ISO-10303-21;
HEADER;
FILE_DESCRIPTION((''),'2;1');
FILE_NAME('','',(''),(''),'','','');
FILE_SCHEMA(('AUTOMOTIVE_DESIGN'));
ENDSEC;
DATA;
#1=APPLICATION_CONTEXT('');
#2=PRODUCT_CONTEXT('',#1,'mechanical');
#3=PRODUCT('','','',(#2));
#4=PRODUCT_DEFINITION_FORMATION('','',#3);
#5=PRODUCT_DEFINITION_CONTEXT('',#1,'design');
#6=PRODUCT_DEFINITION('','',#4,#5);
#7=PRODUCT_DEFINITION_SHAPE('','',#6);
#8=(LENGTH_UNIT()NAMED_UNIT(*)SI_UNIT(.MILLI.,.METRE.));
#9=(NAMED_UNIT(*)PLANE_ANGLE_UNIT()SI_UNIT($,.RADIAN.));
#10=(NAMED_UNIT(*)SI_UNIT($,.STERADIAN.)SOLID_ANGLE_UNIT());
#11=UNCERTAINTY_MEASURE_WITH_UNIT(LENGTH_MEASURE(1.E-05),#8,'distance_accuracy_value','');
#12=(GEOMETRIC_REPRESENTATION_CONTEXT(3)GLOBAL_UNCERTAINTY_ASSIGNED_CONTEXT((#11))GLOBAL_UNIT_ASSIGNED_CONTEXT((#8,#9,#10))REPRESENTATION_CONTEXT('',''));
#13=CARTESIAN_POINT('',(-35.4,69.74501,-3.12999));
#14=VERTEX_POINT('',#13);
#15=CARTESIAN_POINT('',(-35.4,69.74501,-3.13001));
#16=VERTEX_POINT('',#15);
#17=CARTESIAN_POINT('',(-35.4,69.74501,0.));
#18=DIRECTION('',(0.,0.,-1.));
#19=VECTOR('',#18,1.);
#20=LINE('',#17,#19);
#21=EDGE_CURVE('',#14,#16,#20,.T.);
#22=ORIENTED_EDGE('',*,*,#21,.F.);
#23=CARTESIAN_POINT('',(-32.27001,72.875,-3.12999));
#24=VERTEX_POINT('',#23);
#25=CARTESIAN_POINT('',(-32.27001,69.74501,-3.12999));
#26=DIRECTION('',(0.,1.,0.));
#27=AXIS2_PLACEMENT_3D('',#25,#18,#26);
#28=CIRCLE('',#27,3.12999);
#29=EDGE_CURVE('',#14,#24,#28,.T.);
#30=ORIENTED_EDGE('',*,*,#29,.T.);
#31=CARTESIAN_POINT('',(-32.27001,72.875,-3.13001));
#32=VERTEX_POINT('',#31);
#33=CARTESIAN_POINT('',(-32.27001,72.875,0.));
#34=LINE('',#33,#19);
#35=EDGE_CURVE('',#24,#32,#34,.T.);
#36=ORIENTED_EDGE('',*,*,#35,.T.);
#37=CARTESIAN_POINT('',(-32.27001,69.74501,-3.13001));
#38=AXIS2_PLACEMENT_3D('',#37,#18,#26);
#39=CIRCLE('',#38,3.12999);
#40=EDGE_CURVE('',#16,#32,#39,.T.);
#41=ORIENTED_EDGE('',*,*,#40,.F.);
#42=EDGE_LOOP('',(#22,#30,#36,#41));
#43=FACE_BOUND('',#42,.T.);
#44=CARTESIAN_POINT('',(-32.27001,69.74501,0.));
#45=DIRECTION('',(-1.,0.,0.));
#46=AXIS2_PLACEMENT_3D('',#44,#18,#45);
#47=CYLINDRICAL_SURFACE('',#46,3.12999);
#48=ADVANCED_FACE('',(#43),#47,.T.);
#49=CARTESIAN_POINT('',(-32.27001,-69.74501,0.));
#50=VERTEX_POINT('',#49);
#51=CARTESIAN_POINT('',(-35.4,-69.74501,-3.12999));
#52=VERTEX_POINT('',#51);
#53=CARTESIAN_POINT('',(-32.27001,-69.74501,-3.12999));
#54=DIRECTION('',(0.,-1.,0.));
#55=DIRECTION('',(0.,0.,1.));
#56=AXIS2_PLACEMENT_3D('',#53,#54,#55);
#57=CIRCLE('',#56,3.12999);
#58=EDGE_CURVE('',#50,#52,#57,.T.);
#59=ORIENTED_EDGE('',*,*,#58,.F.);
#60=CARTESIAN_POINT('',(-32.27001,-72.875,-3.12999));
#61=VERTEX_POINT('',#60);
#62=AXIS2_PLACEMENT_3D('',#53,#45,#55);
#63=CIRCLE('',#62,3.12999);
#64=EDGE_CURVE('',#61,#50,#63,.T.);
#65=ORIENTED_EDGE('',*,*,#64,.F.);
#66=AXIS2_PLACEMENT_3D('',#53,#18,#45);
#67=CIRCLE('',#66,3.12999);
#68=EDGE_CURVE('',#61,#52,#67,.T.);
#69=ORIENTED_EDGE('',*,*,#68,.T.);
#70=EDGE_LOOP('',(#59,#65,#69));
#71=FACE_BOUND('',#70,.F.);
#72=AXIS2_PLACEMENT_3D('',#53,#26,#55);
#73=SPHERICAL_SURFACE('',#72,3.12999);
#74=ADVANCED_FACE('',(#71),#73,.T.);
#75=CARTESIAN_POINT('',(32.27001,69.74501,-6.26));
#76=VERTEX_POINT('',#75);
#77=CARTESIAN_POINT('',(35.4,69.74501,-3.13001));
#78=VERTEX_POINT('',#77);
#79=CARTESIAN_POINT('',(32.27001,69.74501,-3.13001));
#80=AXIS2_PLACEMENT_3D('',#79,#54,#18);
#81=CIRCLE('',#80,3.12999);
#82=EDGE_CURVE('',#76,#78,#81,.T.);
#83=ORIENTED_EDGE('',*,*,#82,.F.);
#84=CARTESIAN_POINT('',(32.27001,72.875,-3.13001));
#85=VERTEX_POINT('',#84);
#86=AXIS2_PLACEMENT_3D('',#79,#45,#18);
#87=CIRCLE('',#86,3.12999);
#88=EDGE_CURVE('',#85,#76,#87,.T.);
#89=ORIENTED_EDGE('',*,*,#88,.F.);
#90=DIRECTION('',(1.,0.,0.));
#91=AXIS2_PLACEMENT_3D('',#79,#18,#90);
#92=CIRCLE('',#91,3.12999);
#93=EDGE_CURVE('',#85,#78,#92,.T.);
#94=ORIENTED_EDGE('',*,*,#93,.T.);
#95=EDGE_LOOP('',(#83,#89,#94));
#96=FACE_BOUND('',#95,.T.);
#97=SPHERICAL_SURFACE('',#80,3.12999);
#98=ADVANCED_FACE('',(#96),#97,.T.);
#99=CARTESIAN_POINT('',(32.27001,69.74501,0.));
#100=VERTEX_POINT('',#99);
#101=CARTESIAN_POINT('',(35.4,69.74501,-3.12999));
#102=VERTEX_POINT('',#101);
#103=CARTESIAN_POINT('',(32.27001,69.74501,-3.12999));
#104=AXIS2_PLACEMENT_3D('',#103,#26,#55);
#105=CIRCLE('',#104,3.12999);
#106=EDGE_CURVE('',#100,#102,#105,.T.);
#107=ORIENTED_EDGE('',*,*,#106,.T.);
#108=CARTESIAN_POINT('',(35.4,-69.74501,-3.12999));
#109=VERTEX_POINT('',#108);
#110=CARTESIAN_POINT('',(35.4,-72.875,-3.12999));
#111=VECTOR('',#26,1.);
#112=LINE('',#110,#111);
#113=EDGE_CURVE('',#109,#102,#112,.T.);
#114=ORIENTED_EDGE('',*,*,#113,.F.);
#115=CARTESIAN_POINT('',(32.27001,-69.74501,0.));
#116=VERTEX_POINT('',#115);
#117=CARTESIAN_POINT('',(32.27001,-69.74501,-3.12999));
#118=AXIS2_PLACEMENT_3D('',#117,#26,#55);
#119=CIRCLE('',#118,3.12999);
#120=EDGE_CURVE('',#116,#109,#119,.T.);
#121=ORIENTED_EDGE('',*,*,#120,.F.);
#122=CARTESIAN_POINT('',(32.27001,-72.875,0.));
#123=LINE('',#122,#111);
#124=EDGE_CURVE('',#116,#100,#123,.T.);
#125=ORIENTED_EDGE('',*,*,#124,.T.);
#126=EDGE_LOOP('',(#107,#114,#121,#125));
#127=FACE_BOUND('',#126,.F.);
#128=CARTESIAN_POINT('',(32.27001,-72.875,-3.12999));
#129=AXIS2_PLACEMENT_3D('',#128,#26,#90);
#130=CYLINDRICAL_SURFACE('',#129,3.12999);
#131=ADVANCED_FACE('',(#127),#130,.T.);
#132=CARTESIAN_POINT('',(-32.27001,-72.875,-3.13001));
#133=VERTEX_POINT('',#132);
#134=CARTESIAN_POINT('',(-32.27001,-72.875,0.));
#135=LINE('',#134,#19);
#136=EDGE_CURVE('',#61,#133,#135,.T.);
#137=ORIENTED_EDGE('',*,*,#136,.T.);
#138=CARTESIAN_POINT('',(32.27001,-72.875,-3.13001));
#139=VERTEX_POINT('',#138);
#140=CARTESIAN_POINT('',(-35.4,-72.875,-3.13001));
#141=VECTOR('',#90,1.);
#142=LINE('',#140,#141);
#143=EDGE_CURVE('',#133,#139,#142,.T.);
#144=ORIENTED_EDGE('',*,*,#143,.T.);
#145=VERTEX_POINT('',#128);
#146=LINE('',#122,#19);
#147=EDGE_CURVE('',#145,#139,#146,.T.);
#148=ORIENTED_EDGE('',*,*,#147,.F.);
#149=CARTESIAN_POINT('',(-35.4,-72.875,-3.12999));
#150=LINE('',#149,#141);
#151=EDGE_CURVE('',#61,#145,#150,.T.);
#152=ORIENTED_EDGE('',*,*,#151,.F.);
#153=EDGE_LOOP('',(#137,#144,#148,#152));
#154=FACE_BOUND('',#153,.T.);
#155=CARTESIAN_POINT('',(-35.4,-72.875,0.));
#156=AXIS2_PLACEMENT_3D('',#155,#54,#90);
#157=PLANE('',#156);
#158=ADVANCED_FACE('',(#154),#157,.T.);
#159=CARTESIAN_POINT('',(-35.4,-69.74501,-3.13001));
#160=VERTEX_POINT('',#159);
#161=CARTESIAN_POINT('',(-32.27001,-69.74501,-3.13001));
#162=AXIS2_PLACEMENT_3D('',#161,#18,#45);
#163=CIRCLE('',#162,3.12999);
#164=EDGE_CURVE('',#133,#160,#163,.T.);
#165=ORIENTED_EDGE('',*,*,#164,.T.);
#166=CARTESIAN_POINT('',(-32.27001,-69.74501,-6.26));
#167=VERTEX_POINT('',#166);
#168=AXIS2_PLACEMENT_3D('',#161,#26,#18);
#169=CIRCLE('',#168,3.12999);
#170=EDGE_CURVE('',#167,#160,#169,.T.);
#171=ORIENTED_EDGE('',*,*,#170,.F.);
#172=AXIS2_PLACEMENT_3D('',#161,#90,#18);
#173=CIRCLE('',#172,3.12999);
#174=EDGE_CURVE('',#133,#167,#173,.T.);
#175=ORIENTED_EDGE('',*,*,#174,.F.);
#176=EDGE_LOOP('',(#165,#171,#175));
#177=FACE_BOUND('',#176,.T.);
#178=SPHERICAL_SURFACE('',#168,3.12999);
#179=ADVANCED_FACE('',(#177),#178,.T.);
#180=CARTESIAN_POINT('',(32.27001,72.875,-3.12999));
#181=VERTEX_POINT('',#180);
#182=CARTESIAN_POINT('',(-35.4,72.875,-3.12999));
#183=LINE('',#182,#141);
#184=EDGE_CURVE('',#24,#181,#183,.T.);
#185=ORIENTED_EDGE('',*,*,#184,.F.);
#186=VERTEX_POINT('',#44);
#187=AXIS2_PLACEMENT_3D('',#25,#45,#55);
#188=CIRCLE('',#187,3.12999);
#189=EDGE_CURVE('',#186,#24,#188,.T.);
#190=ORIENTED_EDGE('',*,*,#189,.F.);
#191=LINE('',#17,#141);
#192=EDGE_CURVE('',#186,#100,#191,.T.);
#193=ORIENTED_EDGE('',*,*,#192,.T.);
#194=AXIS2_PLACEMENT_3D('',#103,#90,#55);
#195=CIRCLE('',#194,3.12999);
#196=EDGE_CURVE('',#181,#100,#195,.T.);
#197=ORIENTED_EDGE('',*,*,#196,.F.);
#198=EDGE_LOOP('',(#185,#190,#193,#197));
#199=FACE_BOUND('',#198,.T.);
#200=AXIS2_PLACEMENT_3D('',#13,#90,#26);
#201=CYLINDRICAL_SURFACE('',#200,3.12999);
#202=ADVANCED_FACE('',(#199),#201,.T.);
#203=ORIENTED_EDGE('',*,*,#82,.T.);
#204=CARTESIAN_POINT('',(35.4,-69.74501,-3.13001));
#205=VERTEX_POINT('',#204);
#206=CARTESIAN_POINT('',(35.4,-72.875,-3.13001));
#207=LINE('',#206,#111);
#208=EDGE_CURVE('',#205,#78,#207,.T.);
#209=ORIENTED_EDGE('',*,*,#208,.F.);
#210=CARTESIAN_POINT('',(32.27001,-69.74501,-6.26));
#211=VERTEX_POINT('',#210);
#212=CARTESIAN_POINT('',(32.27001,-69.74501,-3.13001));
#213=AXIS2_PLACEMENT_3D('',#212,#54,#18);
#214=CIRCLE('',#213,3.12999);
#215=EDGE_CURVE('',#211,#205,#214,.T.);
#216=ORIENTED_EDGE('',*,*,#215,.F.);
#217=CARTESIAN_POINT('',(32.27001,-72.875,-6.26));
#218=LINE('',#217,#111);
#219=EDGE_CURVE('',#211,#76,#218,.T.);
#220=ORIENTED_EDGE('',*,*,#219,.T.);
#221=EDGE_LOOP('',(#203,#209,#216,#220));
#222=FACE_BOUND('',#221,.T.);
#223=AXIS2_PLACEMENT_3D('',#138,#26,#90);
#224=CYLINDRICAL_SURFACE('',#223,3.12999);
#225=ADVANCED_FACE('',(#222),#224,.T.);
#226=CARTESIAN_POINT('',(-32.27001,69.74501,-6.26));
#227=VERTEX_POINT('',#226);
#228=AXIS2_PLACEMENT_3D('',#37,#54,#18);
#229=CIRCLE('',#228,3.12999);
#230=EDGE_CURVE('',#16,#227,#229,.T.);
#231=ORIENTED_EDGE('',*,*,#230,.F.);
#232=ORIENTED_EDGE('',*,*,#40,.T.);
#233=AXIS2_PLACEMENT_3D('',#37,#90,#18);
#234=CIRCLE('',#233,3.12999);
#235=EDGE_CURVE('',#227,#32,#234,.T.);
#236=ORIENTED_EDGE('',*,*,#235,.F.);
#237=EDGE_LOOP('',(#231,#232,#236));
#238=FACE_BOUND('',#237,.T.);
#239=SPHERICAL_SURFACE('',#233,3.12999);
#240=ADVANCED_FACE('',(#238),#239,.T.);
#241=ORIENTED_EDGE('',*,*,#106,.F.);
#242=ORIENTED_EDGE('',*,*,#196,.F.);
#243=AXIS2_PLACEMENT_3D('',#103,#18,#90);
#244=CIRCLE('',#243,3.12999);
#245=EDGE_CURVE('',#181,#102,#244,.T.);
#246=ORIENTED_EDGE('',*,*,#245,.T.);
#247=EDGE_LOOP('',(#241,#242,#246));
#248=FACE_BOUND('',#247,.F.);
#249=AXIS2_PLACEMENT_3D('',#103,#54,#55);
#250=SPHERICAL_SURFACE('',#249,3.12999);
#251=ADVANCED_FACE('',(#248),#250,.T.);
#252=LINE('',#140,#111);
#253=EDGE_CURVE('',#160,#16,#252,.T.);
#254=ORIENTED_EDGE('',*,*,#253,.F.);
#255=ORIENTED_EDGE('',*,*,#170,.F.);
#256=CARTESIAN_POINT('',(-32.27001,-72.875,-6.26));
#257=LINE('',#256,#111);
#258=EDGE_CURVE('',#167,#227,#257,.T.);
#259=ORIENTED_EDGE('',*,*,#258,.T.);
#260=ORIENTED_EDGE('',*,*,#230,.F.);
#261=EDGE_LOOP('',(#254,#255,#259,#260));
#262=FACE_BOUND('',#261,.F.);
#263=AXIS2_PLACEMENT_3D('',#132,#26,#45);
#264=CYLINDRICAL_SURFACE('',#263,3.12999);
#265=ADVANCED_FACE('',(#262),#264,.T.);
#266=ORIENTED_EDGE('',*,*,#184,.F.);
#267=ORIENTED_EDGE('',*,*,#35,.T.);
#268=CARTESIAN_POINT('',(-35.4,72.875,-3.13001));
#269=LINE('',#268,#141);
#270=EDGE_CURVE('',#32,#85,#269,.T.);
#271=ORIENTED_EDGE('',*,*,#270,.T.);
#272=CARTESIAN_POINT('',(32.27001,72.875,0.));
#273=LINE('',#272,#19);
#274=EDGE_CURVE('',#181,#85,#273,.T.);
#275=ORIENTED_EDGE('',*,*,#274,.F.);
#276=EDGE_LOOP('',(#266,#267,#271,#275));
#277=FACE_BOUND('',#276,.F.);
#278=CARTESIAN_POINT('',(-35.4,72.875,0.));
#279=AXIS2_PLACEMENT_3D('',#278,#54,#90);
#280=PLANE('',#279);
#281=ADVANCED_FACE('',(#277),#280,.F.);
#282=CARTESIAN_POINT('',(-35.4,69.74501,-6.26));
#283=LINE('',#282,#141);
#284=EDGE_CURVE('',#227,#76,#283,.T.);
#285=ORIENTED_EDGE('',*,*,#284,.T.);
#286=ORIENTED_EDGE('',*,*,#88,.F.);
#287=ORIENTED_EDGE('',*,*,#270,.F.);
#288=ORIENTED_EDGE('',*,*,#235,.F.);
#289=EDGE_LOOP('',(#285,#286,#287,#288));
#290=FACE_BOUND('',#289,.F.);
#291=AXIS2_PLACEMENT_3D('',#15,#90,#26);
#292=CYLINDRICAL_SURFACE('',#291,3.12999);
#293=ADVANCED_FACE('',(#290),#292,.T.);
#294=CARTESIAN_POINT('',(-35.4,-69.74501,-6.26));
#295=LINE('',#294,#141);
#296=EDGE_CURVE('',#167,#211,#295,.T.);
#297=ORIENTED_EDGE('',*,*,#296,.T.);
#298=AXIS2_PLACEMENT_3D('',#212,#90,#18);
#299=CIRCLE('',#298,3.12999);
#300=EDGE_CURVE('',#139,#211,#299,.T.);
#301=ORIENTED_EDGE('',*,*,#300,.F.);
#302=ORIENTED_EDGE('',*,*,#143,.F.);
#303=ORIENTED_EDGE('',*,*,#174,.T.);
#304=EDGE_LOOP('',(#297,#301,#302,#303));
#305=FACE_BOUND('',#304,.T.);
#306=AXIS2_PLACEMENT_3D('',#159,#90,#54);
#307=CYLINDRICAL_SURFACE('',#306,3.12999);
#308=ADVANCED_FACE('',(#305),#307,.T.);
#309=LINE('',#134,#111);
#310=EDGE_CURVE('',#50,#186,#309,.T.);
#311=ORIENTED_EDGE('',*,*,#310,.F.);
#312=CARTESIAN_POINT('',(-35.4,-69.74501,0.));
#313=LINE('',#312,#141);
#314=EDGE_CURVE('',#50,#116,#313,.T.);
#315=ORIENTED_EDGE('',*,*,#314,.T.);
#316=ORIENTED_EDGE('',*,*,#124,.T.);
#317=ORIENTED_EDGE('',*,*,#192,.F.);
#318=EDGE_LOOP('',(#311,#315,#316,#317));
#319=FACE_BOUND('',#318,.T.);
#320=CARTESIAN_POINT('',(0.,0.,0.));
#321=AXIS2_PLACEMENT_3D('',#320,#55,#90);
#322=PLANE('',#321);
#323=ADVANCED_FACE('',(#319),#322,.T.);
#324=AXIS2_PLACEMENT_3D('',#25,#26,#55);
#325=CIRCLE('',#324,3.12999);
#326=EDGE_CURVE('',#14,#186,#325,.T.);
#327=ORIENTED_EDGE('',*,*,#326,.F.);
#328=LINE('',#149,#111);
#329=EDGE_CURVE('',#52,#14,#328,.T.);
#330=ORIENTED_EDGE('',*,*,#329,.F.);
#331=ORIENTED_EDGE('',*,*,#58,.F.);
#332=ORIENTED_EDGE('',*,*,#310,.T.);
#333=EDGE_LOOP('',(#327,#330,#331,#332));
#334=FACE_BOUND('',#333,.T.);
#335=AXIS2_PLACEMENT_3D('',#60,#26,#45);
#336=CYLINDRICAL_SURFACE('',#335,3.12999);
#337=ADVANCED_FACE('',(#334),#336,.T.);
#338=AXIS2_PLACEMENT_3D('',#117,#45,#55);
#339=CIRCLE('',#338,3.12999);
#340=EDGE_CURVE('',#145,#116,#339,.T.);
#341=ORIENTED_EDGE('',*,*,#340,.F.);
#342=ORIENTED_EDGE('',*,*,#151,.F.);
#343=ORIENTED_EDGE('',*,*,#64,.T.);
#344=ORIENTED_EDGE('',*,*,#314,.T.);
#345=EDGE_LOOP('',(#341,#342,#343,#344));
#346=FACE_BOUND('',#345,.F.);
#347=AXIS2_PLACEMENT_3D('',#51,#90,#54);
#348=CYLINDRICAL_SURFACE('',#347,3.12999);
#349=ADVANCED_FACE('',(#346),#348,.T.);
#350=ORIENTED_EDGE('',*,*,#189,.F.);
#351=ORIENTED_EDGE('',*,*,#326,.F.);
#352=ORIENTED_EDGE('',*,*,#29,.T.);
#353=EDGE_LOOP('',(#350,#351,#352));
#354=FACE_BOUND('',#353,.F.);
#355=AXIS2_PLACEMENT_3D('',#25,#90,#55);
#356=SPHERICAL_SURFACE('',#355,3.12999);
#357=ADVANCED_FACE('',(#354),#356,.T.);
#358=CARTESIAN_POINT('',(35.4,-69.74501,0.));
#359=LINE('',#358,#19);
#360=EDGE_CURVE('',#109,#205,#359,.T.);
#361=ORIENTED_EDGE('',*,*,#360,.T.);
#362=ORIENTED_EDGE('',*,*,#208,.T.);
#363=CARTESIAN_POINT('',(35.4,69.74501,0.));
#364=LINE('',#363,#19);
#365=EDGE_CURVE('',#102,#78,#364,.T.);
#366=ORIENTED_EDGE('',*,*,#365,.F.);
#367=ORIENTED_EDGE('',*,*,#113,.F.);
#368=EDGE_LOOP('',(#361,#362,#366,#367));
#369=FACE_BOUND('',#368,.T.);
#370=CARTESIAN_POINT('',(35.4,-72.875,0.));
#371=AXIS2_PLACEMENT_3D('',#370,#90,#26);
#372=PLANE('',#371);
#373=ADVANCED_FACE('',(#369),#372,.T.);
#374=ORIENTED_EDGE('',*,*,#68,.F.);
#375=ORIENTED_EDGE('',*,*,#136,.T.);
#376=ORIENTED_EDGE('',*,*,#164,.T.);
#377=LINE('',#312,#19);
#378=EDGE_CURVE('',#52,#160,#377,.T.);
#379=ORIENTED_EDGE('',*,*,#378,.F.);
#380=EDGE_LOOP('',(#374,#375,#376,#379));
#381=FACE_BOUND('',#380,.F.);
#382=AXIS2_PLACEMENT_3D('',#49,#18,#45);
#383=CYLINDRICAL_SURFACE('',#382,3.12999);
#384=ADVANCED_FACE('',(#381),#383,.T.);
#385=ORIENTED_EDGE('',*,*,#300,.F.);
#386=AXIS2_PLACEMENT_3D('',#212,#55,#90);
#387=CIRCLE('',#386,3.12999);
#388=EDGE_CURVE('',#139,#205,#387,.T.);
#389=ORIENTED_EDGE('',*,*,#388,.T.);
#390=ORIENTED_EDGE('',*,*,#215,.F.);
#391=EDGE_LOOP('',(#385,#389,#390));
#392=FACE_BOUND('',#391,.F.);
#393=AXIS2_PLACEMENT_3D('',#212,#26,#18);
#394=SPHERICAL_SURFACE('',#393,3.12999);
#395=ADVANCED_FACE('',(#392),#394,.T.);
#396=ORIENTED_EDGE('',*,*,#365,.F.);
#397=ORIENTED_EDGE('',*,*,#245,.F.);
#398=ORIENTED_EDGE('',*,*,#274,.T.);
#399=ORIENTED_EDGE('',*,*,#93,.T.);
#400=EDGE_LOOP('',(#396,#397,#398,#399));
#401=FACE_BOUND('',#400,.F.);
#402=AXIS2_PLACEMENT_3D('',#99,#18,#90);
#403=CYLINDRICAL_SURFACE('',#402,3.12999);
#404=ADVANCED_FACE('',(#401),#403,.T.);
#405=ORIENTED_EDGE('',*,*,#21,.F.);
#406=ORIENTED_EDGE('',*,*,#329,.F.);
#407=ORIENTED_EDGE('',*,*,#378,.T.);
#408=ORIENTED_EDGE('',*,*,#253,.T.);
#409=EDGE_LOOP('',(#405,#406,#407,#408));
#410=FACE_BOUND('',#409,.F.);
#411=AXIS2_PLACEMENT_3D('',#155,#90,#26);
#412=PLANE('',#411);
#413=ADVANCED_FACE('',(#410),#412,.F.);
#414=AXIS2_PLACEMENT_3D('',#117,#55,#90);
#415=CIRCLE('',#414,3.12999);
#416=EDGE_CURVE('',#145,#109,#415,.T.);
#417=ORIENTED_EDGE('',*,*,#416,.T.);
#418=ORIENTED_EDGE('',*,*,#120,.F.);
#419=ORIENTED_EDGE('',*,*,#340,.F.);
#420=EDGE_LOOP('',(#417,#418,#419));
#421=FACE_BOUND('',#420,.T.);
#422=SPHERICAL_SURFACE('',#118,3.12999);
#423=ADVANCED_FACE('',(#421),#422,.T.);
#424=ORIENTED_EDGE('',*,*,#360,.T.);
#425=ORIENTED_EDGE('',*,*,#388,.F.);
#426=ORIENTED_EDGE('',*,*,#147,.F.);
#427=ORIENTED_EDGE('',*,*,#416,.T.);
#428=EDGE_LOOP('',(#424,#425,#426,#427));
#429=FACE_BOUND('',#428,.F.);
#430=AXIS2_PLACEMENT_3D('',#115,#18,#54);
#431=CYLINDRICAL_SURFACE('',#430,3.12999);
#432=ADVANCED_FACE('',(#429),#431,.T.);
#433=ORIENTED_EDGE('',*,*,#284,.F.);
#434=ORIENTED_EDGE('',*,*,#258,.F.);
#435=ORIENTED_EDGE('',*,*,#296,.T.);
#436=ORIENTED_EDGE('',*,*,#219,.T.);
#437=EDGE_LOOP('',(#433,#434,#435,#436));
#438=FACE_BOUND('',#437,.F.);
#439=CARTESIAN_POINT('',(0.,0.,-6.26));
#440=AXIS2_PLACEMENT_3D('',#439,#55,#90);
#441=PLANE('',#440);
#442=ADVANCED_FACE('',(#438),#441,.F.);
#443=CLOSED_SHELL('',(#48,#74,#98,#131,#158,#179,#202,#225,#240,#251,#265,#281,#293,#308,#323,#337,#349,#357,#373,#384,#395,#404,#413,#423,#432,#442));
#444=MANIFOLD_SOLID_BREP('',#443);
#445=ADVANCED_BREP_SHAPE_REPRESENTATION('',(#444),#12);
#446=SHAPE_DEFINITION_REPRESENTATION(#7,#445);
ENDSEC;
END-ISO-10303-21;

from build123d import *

# Parameters (mm, degrees)
F0_W     = 70.8
F0_H     = 145.75
F1_DEPTH = 6.26
F2_R     = 3.12999


# Not quite as in the source:
# - a fillet or chamfer is up to 0.001 mm smaller than in the source, because OpenCascade refuses the exact size


with BuildPart() as f1:
    # F0 (on Top) → F1 (new body)
    with BuildSketch(Plane.XY):
        Rectangle(F0_W, F0_H)
        with BuildLine():
            Line((-34.9, -69.245), (-34.9, 69.245))
            ThreePointArc((-34.9, 69.245), (-33.9832442251, 71.4582442251), (-31.77, 72.375))
            Line((-31.77, 72.375), (31.77, 72.375))
            ThreePointArc((31.77, 72.375), (33.9832442251, 71.4582442251), (34.9, 69.245))
            Line((34.9, 69.245), (34.9, -69.245))
            ThreePointArc((34.9, -69.245), (33.9832442251, -71.4582442251), (31.77, -72.375))
            Line((31.77, -72.375), (-31.77, -72.375))
            ThreePointArc((-31.77, -72.375), (-33.9832442251, -71.4582442251), (-34.9, -69.245))
        make_face(mode=Mode.SUBTRACT)
        with BuildLine():
            ThreePointArc((-31.77, 72.375), (-33.9832442251, 71.4582442251), (-34.9, 69.245))
            Line((-34.9, 69.245), (-34.9, -69.245))
            ThreePointArc((-34.9, -69.245), (-33.9832442251, -71.4582442251), (-31.77, -72.375))
            Line((-31.77, -72.375), (31.77, -72.375))
            ThreePointArc((31.77, -72.375), (33.9832442251, -71.4582442251), (34.9, -69.245))
            Line((34.9, -69.245), (34.9, 69.245))
            ThreePointArc((34.9, 69.245), (33.9832442251, 71.4582442251), (31.77, 72.375))
            Line((31.77, 72.375), (-31.77, 72.375))
        make_face()
    extrude(amount=-F1_DEPTH)

    # F2 (radius 3.13 in the source; OpenCascade refuses exactly that, so slightly less here)
    f2_edges = [f1.edges().sort_by_distance(p)[0] for p in [
        (35.4, 0, 0),
        (0, 72.875, 0),
        (-35.4, 0, 0),
        (0, -72.875, 0),
        (35.4, 0, -6.26),
        (0, 72.875, -6.26),
        (-35.4, 0, -6.26),
        (0, -72.875, -6.26),
        (35.4, -72.875, -3.13),
        (-35.4, -72.875, -3.13),
        (-35.4, 72.875, -3.13),
        (35.4, 72.875, -3.13),
    ]]
    fillet(f2_edges, radius=F2_R)


solid = f1.part
